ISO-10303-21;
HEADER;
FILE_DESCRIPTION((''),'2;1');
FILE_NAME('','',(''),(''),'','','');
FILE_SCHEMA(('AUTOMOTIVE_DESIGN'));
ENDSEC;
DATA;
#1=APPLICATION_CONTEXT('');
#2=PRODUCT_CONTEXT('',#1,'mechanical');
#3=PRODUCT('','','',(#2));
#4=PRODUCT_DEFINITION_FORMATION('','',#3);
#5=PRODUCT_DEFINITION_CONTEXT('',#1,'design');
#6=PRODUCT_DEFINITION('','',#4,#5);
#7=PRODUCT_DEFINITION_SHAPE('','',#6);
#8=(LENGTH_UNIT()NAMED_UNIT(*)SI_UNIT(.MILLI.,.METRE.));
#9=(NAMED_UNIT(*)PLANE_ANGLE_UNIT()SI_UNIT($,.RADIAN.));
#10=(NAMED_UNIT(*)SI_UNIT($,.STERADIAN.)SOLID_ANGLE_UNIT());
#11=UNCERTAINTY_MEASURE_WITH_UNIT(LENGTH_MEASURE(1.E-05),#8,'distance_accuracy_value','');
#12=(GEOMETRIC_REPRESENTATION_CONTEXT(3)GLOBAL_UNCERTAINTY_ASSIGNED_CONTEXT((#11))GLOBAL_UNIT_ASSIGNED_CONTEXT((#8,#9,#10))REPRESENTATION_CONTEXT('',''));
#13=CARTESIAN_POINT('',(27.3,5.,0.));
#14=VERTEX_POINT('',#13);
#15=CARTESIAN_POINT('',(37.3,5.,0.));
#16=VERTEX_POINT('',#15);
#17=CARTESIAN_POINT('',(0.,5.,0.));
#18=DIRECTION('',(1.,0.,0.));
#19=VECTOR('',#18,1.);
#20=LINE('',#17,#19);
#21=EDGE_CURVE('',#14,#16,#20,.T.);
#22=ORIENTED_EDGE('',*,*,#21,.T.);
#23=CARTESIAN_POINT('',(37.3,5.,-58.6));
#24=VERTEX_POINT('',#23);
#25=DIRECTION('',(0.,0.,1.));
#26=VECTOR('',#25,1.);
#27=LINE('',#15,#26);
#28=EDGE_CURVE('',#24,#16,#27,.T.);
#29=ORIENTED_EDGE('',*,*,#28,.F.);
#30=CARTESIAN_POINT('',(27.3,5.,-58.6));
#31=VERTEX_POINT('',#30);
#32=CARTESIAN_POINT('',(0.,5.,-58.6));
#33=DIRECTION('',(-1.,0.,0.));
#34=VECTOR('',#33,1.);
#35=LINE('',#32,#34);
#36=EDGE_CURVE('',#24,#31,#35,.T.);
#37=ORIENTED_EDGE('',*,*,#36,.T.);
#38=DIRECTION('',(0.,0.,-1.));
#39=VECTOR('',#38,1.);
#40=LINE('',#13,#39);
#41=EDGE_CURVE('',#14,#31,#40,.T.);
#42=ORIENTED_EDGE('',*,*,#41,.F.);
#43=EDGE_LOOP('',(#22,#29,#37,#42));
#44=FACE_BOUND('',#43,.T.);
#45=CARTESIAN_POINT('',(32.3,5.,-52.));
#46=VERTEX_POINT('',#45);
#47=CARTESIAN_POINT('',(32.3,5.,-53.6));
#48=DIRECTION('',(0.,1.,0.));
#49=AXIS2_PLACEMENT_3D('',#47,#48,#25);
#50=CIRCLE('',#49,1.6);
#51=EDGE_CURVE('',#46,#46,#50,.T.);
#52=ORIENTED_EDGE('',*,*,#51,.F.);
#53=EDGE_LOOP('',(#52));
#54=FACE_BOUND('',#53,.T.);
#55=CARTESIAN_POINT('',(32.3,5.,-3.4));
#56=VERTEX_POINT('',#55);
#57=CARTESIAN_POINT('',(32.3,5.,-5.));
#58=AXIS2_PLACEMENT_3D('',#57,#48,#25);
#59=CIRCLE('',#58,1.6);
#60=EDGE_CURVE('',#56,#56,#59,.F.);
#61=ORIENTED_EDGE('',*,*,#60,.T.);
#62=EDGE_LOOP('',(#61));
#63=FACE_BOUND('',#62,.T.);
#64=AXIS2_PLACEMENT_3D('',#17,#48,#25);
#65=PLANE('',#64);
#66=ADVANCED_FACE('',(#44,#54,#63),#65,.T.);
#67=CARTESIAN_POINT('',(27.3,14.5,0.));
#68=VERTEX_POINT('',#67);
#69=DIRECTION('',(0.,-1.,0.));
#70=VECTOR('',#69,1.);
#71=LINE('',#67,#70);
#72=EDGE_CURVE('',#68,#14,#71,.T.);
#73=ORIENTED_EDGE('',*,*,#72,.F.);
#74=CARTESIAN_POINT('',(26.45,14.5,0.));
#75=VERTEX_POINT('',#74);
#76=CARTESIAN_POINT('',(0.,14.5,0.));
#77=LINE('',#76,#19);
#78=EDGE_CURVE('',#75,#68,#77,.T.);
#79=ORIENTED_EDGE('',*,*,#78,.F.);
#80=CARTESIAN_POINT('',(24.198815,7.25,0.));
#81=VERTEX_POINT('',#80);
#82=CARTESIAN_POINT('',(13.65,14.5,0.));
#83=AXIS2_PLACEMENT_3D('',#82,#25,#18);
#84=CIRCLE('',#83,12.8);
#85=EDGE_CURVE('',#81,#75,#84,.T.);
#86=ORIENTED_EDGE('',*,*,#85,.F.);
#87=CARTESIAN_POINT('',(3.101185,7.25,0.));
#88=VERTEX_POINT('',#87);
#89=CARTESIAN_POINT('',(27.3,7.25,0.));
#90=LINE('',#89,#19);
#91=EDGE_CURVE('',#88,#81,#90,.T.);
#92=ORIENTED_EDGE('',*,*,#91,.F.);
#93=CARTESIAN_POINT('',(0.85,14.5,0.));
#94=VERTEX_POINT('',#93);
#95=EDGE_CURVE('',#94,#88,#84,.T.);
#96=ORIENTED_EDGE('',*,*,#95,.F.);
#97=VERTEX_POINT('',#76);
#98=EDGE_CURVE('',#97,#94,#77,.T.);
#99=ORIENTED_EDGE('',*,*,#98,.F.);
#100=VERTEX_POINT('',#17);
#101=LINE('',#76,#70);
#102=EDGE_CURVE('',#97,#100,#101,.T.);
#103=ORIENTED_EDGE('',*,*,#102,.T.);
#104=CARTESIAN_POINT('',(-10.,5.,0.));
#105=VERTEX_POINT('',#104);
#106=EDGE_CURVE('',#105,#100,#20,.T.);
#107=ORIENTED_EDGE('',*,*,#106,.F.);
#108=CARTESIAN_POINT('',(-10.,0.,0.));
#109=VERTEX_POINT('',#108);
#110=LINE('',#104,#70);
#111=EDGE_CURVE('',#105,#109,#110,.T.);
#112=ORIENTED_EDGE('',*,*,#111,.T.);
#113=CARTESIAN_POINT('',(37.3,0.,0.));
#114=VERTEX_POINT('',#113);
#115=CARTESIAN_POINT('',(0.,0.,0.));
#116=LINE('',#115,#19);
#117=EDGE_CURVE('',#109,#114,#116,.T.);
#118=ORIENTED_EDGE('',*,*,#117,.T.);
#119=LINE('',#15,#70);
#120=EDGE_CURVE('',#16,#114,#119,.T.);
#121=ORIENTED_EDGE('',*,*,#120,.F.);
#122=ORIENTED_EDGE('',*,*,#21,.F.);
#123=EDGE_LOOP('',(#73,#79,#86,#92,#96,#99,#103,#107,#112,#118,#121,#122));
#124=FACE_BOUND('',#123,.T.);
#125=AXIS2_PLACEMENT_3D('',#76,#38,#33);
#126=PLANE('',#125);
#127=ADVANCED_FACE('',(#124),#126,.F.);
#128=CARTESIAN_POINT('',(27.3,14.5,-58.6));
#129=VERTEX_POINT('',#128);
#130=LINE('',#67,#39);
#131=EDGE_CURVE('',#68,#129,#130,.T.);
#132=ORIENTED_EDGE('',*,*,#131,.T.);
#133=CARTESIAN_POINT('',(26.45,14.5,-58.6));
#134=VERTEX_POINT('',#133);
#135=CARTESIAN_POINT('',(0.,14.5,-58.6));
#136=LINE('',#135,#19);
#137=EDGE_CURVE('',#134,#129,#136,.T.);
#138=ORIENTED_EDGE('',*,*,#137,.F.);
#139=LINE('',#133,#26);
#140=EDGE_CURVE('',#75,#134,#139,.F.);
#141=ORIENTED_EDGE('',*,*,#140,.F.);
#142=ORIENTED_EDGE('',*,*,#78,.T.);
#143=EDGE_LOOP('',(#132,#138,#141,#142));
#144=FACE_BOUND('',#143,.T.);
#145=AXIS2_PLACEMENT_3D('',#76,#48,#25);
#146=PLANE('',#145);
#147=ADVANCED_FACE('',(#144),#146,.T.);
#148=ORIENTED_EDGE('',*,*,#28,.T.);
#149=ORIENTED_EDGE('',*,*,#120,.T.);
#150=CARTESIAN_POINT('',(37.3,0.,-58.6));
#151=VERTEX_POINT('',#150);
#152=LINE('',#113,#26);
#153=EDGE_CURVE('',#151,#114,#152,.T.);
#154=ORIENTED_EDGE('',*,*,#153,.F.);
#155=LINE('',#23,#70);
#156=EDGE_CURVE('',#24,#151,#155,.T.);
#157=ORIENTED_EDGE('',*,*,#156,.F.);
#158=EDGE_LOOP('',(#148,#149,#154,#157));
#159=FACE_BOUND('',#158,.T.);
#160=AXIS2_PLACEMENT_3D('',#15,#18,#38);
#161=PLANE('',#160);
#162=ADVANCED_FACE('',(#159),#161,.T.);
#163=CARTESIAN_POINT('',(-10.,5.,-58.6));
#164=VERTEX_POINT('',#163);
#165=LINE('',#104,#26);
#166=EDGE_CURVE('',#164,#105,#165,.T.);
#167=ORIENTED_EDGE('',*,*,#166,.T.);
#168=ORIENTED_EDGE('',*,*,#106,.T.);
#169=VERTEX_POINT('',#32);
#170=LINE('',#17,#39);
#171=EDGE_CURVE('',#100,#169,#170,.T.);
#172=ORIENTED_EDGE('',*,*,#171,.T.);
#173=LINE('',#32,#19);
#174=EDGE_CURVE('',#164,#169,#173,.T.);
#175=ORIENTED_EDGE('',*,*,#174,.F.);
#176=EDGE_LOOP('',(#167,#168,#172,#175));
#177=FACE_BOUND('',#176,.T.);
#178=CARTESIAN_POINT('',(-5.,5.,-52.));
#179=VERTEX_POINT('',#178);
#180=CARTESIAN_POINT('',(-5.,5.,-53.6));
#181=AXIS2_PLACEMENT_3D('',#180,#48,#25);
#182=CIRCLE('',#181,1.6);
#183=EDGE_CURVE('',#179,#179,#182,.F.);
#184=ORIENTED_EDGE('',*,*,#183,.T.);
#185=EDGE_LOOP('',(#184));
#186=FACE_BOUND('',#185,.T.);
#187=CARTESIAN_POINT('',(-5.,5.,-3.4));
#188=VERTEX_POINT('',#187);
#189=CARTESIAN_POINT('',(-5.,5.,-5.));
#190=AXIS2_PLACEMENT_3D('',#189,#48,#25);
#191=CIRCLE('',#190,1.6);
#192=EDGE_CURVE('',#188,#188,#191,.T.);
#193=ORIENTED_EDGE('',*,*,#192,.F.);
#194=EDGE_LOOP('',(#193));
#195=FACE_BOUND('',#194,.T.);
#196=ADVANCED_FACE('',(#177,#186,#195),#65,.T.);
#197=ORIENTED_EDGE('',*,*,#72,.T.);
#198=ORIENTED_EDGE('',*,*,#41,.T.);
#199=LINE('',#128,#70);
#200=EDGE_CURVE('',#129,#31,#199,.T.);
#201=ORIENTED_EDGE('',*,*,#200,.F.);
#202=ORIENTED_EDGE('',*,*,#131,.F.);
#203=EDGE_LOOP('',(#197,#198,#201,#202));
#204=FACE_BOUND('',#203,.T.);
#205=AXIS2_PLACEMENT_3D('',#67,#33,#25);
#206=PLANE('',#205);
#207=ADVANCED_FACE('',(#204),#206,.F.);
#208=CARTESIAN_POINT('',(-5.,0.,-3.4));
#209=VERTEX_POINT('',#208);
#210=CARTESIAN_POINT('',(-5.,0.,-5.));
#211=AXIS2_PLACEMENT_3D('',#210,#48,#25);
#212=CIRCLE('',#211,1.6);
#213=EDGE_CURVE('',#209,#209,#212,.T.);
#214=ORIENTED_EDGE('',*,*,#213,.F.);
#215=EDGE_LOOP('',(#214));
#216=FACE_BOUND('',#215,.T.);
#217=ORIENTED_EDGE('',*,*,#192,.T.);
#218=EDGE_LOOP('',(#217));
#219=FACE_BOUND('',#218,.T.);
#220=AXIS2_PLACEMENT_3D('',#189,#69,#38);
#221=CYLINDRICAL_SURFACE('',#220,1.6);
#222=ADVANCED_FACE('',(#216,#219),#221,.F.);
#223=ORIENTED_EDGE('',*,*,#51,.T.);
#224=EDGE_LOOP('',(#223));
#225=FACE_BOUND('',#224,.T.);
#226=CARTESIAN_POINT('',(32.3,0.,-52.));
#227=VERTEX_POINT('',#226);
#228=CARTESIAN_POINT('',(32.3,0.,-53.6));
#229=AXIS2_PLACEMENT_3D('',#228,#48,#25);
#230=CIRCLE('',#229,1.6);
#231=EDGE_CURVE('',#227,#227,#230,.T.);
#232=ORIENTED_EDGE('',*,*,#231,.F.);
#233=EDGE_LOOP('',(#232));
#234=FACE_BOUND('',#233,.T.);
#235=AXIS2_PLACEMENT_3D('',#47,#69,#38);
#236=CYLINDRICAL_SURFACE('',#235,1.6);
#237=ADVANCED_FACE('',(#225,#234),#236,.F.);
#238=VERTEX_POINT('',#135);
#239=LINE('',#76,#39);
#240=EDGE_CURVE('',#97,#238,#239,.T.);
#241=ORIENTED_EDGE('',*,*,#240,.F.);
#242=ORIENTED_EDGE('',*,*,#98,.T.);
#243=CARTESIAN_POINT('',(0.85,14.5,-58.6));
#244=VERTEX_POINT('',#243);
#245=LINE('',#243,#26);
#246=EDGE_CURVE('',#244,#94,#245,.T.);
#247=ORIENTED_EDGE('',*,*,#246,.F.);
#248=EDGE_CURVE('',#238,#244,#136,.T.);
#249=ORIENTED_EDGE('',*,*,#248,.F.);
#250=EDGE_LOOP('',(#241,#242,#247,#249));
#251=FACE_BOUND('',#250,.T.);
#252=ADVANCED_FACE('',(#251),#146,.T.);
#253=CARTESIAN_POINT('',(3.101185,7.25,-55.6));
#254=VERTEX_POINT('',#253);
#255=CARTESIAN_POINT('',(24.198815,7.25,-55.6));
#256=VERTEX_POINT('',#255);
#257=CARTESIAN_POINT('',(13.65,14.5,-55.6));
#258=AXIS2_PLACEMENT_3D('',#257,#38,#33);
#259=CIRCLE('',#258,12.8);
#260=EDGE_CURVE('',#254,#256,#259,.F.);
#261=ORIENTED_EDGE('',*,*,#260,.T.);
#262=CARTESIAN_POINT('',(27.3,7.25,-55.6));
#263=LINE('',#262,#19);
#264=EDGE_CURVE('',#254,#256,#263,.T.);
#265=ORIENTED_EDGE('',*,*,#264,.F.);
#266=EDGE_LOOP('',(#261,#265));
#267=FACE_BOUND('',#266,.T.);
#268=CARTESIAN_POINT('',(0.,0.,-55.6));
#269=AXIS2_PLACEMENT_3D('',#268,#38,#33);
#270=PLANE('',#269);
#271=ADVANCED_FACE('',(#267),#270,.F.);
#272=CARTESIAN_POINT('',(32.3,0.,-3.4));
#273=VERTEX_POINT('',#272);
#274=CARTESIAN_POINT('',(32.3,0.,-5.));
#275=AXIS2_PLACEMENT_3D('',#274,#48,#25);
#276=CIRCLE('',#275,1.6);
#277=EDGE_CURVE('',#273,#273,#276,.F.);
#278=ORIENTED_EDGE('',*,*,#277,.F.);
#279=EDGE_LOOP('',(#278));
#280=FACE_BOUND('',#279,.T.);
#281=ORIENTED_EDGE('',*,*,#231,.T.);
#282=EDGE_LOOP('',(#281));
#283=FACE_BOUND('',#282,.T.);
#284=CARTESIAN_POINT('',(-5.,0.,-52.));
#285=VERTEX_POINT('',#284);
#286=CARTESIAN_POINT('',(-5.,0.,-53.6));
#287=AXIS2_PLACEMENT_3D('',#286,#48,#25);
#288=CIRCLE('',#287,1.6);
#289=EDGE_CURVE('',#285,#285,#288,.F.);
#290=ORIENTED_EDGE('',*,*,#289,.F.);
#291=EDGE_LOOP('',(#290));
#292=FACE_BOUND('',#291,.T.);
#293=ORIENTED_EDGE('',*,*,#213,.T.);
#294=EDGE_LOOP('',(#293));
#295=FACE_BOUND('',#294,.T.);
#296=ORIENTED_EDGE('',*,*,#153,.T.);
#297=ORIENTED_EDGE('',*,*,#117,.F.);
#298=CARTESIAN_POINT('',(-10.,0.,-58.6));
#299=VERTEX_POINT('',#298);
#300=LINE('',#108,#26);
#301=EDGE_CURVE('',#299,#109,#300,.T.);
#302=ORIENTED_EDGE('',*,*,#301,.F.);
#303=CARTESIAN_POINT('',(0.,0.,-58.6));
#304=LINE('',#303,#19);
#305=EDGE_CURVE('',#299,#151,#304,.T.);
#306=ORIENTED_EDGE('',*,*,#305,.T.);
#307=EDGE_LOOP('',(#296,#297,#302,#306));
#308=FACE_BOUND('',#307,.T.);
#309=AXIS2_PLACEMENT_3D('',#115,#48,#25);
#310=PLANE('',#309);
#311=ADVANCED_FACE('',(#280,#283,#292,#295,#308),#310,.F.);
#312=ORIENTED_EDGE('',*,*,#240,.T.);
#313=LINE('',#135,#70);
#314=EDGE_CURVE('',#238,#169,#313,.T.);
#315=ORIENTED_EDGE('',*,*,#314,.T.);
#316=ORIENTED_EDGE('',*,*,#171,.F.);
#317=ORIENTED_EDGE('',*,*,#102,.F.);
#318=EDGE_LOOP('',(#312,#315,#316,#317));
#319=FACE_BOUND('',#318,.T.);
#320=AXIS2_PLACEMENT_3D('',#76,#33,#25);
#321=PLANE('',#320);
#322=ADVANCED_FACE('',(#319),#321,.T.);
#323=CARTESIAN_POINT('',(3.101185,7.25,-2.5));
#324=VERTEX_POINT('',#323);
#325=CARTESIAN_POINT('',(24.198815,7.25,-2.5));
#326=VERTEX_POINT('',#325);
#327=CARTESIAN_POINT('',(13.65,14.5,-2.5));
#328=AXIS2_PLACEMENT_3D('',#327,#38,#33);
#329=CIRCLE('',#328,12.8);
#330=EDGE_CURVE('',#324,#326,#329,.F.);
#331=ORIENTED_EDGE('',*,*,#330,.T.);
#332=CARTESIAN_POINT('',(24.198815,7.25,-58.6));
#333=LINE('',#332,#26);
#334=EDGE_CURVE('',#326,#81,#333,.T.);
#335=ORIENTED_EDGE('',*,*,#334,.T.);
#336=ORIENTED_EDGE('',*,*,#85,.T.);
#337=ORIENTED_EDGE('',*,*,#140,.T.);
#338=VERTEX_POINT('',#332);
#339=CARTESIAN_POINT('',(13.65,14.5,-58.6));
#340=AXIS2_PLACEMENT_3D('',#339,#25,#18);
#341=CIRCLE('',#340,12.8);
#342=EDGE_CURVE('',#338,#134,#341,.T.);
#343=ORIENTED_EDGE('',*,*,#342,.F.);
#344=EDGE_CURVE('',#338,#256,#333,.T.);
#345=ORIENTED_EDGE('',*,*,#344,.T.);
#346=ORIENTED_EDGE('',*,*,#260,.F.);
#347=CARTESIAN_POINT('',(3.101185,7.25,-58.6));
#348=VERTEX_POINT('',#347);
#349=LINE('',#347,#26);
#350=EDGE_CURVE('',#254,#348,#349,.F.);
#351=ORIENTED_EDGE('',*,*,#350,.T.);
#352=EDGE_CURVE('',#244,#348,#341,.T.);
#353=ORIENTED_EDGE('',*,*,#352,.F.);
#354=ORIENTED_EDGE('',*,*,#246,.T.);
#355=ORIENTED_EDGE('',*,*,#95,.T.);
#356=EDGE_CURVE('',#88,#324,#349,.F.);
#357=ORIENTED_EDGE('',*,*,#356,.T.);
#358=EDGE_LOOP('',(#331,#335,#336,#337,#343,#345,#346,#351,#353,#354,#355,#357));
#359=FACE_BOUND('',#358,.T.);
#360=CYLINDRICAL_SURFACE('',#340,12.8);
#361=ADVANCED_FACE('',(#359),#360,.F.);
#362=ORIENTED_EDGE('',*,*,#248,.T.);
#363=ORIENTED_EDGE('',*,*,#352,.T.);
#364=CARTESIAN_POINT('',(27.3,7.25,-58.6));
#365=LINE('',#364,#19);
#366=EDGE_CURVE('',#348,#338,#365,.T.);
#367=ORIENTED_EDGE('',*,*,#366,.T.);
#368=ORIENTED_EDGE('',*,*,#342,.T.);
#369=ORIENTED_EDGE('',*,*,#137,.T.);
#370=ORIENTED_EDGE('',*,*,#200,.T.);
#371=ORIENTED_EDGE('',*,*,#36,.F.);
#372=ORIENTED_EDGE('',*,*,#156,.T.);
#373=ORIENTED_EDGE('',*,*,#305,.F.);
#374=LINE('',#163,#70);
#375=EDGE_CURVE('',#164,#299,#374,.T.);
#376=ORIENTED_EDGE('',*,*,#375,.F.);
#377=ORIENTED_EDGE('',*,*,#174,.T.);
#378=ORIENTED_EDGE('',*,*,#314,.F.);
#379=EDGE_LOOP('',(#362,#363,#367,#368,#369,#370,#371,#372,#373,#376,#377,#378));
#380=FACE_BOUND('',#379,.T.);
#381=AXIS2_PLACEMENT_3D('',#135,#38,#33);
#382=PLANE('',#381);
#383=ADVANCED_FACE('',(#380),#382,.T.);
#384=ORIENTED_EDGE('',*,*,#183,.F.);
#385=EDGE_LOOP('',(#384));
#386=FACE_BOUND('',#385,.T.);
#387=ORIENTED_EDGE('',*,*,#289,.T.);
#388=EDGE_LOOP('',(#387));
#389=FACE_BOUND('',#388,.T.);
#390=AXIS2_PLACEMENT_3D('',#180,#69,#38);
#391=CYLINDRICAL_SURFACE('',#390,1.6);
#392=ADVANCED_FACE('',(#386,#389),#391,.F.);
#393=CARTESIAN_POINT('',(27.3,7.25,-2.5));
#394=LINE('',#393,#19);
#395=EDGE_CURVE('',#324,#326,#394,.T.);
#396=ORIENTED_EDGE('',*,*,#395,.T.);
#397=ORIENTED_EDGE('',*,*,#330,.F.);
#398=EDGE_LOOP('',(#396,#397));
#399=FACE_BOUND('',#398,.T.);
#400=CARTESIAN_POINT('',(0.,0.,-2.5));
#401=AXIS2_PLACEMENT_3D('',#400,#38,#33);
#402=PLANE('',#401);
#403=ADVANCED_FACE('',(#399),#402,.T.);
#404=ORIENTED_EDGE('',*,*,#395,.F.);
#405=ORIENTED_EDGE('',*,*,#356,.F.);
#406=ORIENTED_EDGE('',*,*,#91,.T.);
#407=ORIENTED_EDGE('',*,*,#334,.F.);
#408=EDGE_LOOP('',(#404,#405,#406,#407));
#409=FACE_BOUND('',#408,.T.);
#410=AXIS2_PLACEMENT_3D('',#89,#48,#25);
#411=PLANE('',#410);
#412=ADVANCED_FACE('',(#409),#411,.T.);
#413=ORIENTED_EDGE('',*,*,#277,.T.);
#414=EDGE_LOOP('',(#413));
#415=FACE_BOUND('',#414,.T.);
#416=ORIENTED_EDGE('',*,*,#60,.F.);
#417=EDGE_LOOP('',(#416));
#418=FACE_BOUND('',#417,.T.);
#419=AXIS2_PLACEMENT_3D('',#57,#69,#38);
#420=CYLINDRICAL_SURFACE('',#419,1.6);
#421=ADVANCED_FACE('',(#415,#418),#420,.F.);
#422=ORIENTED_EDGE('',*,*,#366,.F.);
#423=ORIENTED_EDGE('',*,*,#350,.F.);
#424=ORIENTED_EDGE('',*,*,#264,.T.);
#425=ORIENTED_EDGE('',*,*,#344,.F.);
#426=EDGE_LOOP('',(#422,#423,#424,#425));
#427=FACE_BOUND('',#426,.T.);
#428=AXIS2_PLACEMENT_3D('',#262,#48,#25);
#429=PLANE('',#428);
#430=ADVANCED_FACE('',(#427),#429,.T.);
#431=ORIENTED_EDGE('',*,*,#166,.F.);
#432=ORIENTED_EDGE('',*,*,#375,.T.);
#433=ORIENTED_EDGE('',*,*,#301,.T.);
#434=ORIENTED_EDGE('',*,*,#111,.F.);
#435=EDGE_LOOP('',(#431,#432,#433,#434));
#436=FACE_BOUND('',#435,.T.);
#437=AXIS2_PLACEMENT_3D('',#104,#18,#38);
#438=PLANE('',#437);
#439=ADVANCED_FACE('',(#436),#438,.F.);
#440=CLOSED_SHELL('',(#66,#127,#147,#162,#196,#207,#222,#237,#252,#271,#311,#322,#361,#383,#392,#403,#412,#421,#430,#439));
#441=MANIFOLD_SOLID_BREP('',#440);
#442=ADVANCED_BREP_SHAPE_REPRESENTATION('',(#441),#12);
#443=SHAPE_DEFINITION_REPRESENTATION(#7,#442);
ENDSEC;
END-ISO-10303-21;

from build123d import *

# Parameters (mm, degrees)
SKETCH_1_W          = 27.3
SKETCH_1_H          = 58.6
EXTRUDE_1_DEPTH     = 14.5
SKETCH_3_R          = 12.8
CUT_EXTRUDE_1_DEPTH = 67.253301805
SKETCH_7_W          = 27.3
SKETCH_7_H          = 7.25
EXTRUDE_2_DEPTH     = 3
EXTRUDE_START       = -58.6
EXTRUDE_3_DEPTH     = 2.5
SKETCH_1_3_W        = 10
SKETCH_1_3_H        = 58.6
SKETCH_1_3_R        = 1.6
EXTRUDE_4_DEPTH     = 5


with BuildPart() as part:
    # Эскиз1 → Бобышка-Вытянуть1 (new body)
    with BuildSketch(Plane(origin=(0, 0, 0), x_dir=(1, 0, 0), z_dir=(0, 1, 0))):
        with Locations((13.65, 29.3)):
            Rectangle(SKETCH_1_W, SKETCH_1_H)
    extrude(amount=EXTRUDE_1_DEPTH)

    # Эскиз3 → Вырез-Вытянуть1 (cut, through all)
    with BuildSketch(Plane.XY):
        with Locations((13.65, 14.5)):
            Circle(SKETCH_3_R)
    extrude(amount=-CUT_EXTRUDE_1_DEPTH, mode=Mode.SUBTRACT)

    # Эскиз7 → Бобышка-Вытянуть2 (add)
    with BuildSketch(Plane(origin=(0, 0, -58.6), x_dir=(-1, 0, 0), z_dir=(0, 0, -1))):
        with Locations((-13.65, 3.625)):
            Rectangle(SKETCH_7_W, SKETCH_7_H)
    extrude(amount=-EXTRUDE_2_DEPTH)

    # Эскиз7<2> → Бобышка-Вытянуть3 (add)
    with BuildSketch(Plane(origin=(0, 0, -58.6), x_dir=(-1, 0, 0), z_dir=(0, 0, -1)).offset(EXTRUDE_START)):
        with BuildLine():
            Line((-27.3, 14.5), (-27.3, 7.25))
            Line((-27.3, 7.25), (-24.198815099, 7.25))
            ThreePointArc((-24.198815099, 7.25), (-25.874255259, 10.704267743), (-26.45, 14.5))
            Line((-26.45, 14.5), (-27.3, 14.5))
        make_face()
        with BuildLine():
            Line((-24.198815099, 7.25), (-27.3, 7.25))
            Line((-27.3, 7.25), (-27.3, 0))
            Line((-27.3, 0), (0, 0))
            Line((0, 0), (0, 7.25))
            Line((0, 7.25), (-3.101184901, 7.25))
            ThreePointArc((-3.101184901, 7.25), (-13.65, 1.7), (-24.198815099, 7.25))
        make_face()
        with BuildLine():
            Line((-3.101184901, 7.25), (-24.198815099, 7.25))
            ThreePointArc((-24.198815099, 7.25), (-13.65, 1.7), (-3.101184901, 7.25))
        make_face()
        with BuildLine():
            ThreePointArc((-0.85, 14.5), (-1.425744741, 10.704267743), (-3.101184901, 7.25))
            Line((-3.101184901, 7.25), (0, 7.25))
            Line((0, 7.25), (0, 14.5))
            Line((0, 14.5), (-0.85, 14.5))
        make_face()
    extrude(amount=EXTRUDE_3_DEPTH)

    # Эскиз1<3> → Бобышка-Вытянуть4 (add)
    # profile 1 of 2: a face of its own
    with BuildSketch(Plane(origin=(0, 0, 0), x_dir=(1, 0, 0), z_dir=(0, 1, 0))):
        with Locations((-5, 29.3)):
            Rectangle(SKETCH_1_3_W, SKETCH_1_3_H)
        with Locations((-5, 5)):
            Circle(SKETCH_1_3_R, mode=Mode.SUBTRACT)
        with Locations((-5, 53.6)):
            Circle(SKETCH_1_3_R, mode=Mode.SUBTRACT)
    # profile 2 of 2: a face of its own
    with BuildSketch(Plane(origin=(0, 0, 0), x_dir=(1, 0, 0), z_dir=(0, 1, 0))):
        with Locations((32.3, 29.3)):
            Rectangle(SKETCH_1_3_W, SKETCH_1_3_H)
        with Locations((32.3, 5)):
            Circle(SKETCH_1_3_R, mode=Mode.SUBTRACT)
        with Locations((32.3, 53.6)):
            Circle(SKETCH_1_3_R, mode=Mode.SUBTRACT)
    extrude(amount=EXTRUDE_4_DEPTH)


solid = part.part
